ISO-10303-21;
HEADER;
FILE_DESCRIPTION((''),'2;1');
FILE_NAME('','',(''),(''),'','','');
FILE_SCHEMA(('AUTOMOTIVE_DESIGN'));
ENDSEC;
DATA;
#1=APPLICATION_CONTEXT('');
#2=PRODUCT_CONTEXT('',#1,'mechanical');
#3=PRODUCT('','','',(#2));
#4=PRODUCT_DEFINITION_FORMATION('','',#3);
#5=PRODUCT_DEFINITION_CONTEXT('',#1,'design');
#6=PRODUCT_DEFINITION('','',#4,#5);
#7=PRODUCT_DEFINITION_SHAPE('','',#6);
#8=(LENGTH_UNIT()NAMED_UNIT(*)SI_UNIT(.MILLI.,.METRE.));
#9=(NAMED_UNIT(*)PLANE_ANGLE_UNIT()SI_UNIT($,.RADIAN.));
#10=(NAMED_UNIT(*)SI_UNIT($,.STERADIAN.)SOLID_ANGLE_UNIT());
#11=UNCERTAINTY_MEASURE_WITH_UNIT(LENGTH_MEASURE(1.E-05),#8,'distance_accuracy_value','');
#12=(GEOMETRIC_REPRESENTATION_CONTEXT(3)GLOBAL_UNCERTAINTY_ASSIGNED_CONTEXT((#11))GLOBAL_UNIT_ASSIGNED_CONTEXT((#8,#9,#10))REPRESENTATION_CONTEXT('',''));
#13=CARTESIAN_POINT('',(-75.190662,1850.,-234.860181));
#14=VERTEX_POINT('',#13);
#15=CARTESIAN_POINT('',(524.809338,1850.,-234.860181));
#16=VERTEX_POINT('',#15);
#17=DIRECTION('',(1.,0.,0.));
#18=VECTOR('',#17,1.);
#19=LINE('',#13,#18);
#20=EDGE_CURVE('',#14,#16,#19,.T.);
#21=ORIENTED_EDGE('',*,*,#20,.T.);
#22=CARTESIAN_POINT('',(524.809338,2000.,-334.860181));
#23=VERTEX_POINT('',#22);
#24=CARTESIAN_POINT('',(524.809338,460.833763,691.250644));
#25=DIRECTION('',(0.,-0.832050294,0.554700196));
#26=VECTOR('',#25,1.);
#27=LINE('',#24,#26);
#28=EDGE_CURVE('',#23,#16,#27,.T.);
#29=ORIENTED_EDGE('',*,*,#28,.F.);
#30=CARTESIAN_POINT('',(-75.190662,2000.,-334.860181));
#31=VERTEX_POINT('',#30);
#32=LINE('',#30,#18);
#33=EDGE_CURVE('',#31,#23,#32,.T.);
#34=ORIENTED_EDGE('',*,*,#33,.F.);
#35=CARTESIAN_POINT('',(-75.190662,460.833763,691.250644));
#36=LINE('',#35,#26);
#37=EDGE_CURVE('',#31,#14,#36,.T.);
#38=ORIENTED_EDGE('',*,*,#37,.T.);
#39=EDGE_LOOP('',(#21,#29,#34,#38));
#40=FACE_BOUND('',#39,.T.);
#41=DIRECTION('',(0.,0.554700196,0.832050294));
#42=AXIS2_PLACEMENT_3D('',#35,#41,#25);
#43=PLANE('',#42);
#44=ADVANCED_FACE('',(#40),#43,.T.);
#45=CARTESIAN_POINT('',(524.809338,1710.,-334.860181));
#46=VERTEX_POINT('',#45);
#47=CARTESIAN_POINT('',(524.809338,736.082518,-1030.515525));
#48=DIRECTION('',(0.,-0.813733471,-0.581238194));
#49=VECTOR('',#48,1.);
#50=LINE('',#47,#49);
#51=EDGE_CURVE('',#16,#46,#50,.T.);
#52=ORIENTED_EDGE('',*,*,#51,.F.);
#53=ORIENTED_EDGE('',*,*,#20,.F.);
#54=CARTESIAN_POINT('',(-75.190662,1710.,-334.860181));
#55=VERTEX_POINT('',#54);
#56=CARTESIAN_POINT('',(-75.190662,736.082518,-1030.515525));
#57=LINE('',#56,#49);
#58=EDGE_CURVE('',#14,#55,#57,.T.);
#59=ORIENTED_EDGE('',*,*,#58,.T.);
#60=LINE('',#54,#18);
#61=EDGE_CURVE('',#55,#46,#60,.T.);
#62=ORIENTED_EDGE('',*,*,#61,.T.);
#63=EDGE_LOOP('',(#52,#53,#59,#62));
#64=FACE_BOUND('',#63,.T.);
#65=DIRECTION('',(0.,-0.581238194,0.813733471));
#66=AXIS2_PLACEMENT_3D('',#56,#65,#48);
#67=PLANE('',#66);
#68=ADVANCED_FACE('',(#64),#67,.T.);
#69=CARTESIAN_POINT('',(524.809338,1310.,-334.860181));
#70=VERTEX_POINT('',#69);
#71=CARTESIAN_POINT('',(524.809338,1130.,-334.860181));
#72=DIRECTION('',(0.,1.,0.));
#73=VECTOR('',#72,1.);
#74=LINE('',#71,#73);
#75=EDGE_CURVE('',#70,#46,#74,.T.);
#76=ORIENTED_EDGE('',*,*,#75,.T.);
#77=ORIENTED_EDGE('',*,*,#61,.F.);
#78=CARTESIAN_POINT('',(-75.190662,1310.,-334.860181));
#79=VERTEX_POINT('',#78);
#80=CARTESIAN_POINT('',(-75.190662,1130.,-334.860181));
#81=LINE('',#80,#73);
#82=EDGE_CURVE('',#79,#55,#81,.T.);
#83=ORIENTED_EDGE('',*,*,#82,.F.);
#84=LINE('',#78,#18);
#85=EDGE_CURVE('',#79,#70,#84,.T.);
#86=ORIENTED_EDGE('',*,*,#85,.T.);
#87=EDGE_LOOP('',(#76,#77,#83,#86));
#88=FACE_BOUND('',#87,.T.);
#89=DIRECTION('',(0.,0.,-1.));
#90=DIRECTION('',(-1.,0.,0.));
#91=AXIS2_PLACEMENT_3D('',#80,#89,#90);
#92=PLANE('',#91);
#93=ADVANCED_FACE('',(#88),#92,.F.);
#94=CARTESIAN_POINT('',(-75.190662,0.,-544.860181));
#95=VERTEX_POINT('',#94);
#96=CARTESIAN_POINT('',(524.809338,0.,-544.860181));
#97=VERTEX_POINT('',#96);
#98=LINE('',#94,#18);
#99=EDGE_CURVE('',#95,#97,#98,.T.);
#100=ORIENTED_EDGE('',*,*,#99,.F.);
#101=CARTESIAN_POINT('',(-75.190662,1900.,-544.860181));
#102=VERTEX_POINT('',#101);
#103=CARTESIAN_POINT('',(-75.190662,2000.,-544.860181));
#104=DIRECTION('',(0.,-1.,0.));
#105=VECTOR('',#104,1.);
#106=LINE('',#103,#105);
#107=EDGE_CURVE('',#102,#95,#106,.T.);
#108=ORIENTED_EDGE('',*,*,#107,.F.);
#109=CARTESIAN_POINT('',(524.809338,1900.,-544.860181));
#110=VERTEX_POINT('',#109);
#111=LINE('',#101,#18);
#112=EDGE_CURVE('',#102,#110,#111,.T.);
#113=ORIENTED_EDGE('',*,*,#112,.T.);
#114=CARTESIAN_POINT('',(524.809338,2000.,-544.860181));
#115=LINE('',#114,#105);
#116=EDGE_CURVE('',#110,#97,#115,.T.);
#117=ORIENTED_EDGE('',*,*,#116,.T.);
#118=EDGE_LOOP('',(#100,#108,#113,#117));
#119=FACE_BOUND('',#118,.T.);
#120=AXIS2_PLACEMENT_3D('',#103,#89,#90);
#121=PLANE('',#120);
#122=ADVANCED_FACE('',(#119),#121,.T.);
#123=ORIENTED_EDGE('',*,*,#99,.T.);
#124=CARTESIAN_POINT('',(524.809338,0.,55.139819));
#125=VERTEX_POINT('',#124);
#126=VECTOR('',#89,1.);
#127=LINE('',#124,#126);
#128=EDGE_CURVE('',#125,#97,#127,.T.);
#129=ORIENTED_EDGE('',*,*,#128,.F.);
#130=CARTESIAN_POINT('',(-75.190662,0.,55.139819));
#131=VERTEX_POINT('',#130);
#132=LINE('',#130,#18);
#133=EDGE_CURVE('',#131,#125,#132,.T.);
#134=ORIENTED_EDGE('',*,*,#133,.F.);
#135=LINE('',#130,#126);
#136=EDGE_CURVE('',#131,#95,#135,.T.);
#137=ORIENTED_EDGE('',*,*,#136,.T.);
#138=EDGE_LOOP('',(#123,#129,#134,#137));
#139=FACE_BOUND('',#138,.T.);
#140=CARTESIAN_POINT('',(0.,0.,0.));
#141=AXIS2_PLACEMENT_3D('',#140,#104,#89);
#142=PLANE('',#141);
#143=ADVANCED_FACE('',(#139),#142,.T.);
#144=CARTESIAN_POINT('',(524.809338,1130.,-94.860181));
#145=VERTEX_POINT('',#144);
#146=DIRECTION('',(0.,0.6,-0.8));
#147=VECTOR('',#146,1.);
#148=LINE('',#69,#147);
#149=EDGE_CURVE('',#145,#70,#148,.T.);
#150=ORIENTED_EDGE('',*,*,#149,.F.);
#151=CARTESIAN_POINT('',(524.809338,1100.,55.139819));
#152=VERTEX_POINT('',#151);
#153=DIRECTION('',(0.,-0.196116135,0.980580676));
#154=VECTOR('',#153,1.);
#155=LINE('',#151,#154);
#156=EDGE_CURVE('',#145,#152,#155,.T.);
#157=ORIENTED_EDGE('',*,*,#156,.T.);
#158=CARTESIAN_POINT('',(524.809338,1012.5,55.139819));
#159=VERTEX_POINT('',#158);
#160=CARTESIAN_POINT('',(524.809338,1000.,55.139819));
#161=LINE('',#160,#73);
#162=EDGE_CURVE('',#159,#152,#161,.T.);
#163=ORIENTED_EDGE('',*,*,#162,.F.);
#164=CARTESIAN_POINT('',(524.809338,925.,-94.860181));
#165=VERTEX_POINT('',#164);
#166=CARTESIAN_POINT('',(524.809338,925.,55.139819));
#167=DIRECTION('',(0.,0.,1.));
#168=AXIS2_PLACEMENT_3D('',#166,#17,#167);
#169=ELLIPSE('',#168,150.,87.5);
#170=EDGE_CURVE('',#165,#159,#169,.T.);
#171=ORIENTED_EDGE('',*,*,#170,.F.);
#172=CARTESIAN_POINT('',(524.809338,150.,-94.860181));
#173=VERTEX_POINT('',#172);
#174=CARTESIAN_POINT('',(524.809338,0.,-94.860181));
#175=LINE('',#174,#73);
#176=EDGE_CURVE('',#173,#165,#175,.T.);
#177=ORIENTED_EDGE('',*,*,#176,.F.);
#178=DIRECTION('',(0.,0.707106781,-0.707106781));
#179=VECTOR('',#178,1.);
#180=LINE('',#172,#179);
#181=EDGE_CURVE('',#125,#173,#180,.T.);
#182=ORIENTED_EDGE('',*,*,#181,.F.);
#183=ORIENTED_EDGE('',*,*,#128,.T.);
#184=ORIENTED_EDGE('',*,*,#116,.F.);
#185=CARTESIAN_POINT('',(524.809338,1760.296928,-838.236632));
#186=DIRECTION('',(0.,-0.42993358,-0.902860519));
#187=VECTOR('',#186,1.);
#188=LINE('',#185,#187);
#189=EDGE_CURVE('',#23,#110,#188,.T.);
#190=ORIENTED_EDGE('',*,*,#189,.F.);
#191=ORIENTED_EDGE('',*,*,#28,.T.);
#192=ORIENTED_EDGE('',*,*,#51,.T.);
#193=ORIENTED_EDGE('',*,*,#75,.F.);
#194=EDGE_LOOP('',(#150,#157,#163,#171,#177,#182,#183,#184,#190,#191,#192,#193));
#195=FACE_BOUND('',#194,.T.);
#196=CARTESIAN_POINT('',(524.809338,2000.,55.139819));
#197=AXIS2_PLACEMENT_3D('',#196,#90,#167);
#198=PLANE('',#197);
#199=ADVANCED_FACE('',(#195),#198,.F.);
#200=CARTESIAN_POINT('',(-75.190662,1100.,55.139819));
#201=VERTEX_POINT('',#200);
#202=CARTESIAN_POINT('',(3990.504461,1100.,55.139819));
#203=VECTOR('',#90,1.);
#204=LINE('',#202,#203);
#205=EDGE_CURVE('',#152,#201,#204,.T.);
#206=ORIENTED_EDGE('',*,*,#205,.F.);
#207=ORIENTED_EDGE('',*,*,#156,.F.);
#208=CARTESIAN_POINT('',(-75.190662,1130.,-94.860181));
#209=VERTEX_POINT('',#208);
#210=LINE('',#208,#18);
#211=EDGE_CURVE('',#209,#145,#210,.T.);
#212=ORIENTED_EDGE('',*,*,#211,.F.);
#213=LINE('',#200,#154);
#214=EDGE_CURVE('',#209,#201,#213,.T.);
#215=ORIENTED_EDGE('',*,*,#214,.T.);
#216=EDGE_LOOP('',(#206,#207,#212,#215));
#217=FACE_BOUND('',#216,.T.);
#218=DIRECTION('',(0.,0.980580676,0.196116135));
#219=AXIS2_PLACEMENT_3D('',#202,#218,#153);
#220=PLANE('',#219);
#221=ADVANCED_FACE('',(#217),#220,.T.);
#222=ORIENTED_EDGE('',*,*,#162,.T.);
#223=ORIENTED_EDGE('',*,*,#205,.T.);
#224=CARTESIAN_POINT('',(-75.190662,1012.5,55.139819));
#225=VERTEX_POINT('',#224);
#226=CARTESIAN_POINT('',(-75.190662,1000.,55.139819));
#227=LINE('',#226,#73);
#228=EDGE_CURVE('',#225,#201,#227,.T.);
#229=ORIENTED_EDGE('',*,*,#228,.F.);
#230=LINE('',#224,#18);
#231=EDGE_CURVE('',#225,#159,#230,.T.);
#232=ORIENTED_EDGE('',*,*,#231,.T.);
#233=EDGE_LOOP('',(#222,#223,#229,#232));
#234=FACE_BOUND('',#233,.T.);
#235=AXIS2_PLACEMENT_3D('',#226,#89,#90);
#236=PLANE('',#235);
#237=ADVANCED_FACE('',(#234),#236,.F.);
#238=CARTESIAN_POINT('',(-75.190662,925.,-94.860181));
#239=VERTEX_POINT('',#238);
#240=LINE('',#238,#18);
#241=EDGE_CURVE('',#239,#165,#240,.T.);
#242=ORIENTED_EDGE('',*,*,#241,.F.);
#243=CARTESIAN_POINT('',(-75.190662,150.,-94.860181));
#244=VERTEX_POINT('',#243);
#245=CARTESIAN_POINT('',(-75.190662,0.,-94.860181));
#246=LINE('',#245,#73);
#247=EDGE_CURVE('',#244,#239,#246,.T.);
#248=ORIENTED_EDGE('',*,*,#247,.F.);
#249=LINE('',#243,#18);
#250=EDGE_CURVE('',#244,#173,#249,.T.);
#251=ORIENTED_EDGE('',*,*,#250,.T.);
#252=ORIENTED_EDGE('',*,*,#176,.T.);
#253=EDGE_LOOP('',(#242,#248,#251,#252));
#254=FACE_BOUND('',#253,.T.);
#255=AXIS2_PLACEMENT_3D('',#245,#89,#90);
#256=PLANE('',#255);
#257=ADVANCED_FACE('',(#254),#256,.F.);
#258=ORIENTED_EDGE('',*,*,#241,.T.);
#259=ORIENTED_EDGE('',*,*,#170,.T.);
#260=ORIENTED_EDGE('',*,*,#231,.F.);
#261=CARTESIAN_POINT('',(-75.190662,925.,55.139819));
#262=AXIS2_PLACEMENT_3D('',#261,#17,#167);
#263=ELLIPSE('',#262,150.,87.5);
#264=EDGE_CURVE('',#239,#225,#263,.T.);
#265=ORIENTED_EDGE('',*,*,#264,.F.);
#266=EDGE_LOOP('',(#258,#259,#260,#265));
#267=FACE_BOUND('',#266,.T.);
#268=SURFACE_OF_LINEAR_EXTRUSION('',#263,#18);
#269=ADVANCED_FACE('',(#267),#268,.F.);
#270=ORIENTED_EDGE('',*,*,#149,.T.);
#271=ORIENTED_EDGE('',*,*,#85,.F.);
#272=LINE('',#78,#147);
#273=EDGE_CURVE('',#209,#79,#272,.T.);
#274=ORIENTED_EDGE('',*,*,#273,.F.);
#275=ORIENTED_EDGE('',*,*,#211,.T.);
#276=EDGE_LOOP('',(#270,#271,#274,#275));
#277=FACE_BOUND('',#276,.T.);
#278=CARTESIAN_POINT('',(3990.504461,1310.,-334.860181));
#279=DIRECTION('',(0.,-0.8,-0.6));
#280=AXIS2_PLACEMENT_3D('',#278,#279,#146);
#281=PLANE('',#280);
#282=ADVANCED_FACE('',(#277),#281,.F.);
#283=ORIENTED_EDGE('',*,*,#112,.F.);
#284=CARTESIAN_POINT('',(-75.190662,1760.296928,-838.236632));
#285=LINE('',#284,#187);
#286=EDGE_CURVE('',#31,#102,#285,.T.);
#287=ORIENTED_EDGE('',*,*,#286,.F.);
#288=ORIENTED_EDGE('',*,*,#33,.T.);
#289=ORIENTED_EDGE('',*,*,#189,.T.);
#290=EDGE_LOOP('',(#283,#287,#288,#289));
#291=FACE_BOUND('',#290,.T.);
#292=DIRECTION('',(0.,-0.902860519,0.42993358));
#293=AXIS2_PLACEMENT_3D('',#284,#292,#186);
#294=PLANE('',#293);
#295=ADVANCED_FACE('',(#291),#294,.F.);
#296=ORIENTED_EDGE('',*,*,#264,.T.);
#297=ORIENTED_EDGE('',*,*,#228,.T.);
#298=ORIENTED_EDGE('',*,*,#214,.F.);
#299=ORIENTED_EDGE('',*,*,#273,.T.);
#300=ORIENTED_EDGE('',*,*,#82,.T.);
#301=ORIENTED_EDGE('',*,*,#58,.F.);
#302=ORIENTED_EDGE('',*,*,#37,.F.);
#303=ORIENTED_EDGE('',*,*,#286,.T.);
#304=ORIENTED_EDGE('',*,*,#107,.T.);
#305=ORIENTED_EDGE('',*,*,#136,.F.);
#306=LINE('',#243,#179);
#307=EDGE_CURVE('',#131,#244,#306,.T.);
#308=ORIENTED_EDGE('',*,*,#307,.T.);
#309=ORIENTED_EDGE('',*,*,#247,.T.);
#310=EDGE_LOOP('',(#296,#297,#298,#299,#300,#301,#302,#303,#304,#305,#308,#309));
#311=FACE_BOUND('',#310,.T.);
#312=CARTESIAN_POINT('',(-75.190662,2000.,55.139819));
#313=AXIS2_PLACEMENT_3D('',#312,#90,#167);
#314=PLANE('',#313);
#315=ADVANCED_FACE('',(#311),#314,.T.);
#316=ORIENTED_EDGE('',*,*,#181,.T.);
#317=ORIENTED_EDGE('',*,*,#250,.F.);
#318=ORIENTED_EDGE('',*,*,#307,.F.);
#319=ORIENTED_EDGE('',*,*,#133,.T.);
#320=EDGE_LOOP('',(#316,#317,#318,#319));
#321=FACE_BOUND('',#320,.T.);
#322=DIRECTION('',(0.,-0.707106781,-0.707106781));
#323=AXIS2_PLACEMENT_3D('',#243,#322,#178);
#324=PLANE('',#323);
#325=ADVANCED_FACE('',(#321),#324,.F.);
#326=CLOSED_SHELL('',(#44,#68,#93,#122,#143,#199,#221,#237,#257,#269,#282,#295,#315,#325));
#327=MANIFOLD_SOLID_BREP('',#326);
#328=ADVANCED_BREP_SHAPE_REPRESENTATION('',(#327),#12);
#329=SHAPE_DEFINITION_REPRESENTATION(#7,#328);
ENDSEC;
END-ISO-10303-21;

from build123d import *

# Parameters (mm, degrees)
ESQUISSE1_W                   = 600
ESQUISSE1_H                   = 600
BOSS_EXTRU_1_DEPTH            = 2000
ESQUISSE11_W                  = 150
ESQUISSE11_H                  = 800
ENL_V_MAT_EXTRU_1_DEPTH       = 600
ESQUISSE12_W                  = 150
ESQUISSE12_H                  = 1100
ENL_V_MAT_EXTRU_2_DEPTH       = 600
ESQUISSE14_W                  = 150
ESQUISSE14_H                  = 150
BOSS_EXTRU_3_DEPTH            = 600
ENL_V_MAT_EXTRU_5_DEPTH       = 600
ESQUISSE19_W                  = 150
ESQUISSE19_H                  = 100
ENL_V_MAT_EXTRU_6_DEPTH       = 600
ESQUISSE25_W                  = 150
ESQUISSE25_H                  = 100
BOSS_EXTRU_4_DEPTH            = 600
ESQUISSE26_W                  = 150
ESQUISSE26_H                  = 75
BOSS_EXTRU_7_DEPTH            = 600
ESQUISSE30_RX                 = 150
ESQUISSE30_RY                 = 87.5
ENL_V_MAT_EXTRU_7_DEPTH       = 600
ESQUISSE32_W                  = 150
ESQUISSE32_H                  = 30
BOSS_EXTRU_8_DEPTH            = 600
ENL_V_MAT_EXTRU_8_DEPTH       = 2158.978826807
ENL_V_MAT_EXTRU_8_DEPTH_BACK  = 600
ESQUISSE34_W                  = 240
ESQUISSE34_H                  = 870
ENL_V_MAT_EXTRU_9_DEPTH       = 600
ESQUISSE35_W                  = 240
ESQUISSE35_H                  = 180
BOSS_EXTRU_9_DEPTH            = 600
ENL_V_START                   = -600
ENL_V_MAT_EXTRU_10_DEPTH      = 600
ENL_V_MAT_EXTRU_11_DEPTH      = 2158.978826807
ENL_V_MAT_EXTRU_11_DEPTH_BACK = 600
ENL_V_MAT_EXTRU_12_DEPTH      = 2158.978826807
ENL_V_MAT_EXTRU_12_DEPTH_BACK = 600
ESQUISSE41_W                  = 210
ESQUISSE41_H                  = 100
BOSS_EXTRU_10_DEPTH           = 600
ESQUISSE43_W                  = 100
ESQUISSE43_H                  = 150
BOSS_EXTRU_12_DEPTH           = 600
ESQUISSE44_W                  = 100
ESQUISSE44_H                  = 140
BOSS_EXTRU_13_DEPTH           = 600
ENL_V_MAT_EXTRU_13_DEPTH      = 600
ENL_V_MAT_EXTRU_14_DEPTH      = 600
ENL_V_MAT_EXTRU_15_DEPTH      = 600


# Read off the part's stored shape, not the designer's step: Enlèv. mat.-Extru.10
with BuildPart() as part:
    # Esquisse1 → Boss.-Extru.1 (new body)
    with BuildSketch(Plane(origin=(0, 0, 0), x_dir=(1, 0, 0), z_dir=(0, 1, 0))):
        with Locations((224.80933771, 244.860180987)):
            Rectangle(ESQUISSE1_W, ESQUISSE1_H)
    extrude(amount=BOSS_EXTRU_1_DEPTH)

    # Esquisse11 → Enlèv. mat.-Extru.1 (cut)
    with BuildSketch(Plane(origin=(524.80933771, 0, 0), x_dir=(0, 0, -1), z_dir=(1, 0, 0))):
        with Locations((19.860180987, 400)):
            Rectangle(ESQUISSE11_W, ESQUISSE11_H)
    extrude(amount=-ENL_V_MAT_EXTRU_1_DEPTH, mode=Mode.SUBTRACT)

    # Esquisse12 → Enlèv. mat.-Extru.2 (cut)
    with BuildSketch(Plane(origin=(524.80933771, 0, 0), x_dir=(0, 0, -1), z_dir=(1, 0, 0))):
        with Locations((19.860180987, 1450)):
            Rectangle(ESQUISSE12_W, ESQUISSE12_H)
    extrude(amount=-ENL_V_MAT_EXTRU_2_DEPTH, mode=Mode.SUBTRACT)

    # Esquisse14 → Boss.-Extru.3 (add)
    with BuildSketch(Plane(origin=(524.80933771, 0, 0), x_dir=(0, 0, -1), z_dir=(1, 0, 0))):
        with Locations((19.860180987, 75)):
            Rectangle(ESQUISSE14_W, ESQUISSE14_H)
    extrude(amount=-BOSS_EXTRU_3_DEPTH)

    # Esquisse18 → Enlèv. mat.-Extru.5 (cut)
    with BuildSketch(Plane(origin=(524.80933771, 0, 0), x_dir=(0, 0, -1), z_dir=(1, 0, 0))):
        Polygon((94.860180987, 150), (-55.139819013, 0), (-55.139819013, 150), align=None)
    extrude(amount=-ENL_V_MAT_EXTRU_5_DEPTH, mode=Mode.SUBTRACT)

    # Esquisse19 → Enlèv. mat.-Extru.6 (cut)
    with BuildSketch(Plane(origin=(524.80933771, 0, 0), x_dir=(0, 0, -1), z_dir=(1, 0, 0))):
        with Locations((19.860180987, 850)):
            Rectangle(ESQUISSE19_W, ESQUISSE19_H)
    extrude(amount=-ENL_V_MAT_EXTRU_6_DEPTH, mode=Mode.SUBTRACT)

    # Esquisse25 → Boss.-Extru.4 (add)
    with BuildSketch(Plane(origin=(524.80933771, 0, 0), x_dir=(0, 0, -1), z_dir=(1, 0, 0))):
        with Locations((19.860180987, 1050)):
            Rectangle(ESQUISSE25_W, ESQUISSE25_H)
    extrude(amount=-BOSS_EXTRU_4_DEPTH)

    # Esquisse26 → Boss.-Extru.7 (add)
    with BuildSketch(Plane(origin=(524.80933771, 0, 0), x_dir=(0, 0, -1), z_dir=(1, 0, 0))):
        with Locations((19.860180987, 962.5)):
            Rectangle(ESQUISSE26_W, ESQUISSE26_H)
    extrude(amount=-BOSS_EXTRU_7_DEPTH)

    # Esquisse30 → Enlèv. mat.-Extru.7 (cut)
    with BuildSketch(Plane(origin=(524.80933771, 0, 0), x_dir=(0, 0, -1), z_dir=(1, 0, 0))):
        with Locations((-55.139819013, 925)):
            Ellipse(ESQUISSE30_RX, ESQUISSE30_RY)
    extrude(amount=-ENL_V_MAT_EXTRU_7_DEPTH, mode=Mode.SUBTRACT)

    # Esquisse32 → Boss.-Extru.8 (add)
    with BuildSketch(Plane(origin=(524.80933771, 0, 0), x_dir=(0, 0, -1), z_dir=(1, 0, 0))):
        with Locations((19.860180987, 1115)):
            Rectangle(ESQUISSE32_W, ESQUISSE32_H)
    extrude(amount=-BOSS_EXTRU_8_DEPTH)

    # Esquisse33 → Enlèv. mat.-Extru.8 (cut, two sides: drawn at the far end of the back side and taken through both)
    with BuildSketch(Plane(origin=(524.80933771, 0, 0), x_dir=(0, 0, -1), z_dir=(1, 0, 0)).offset(-ENL_V_MAT_EXTRU_8_DEPTH_BACK)):
        Polygon((94.860180987, 1130), (-55.139819013, 1130), (-55.139819013, 1100), align=None)
    extrude(amount=ENL_V_MAT_EXTRU_8_DEPTH + ENL_V_MAT_EXTRU_8_DEPTH_BACK, mode=Mode.SUBTRACT)

    # Esquisse34 → Enlèv. mat.-Extru.9 (cut)
    with BuildSketch(Plane(origin=(524.80933771, 0, 0), x_dir=(0, 0, -1), z_dir=(1, 0, 0))):
        with Locations((214.860180987, 1565)):
            Rectangle(ESQUISSE34_W, ESQUISSE34_H)
    extrude(amount=-ENL_V_MAT_EXTRU_9_DEPTH, mode=Mode.SUBTRACT)

    # Esquisse35 → Boss.-Extru.9 (add)
    with BuildSketch(Plane(origin=(524.80933771, 0, 0), x_dir=(0, 0, -1), z_dir=(1, 0, 0))):
        with Locations((214.860180987, 1220)):
            Rectangle(ESQUISSE35_W, ESQUISSE35_H)
    extrude(amount=-BOSS_EXTRU_9_DEPTH)

    # Enlèv. mat.-Extru.10 outline → Enlèv. mat.-Extru.10 (cut)
    with BuildSketch(Plane(origin=(524.80933771, 0, 0), x_dir=(0, 0, -1), z_dir=(1, 0, 0)).offset(ENL_V_START)):
        Polygon((94.860180987, 1310), (94.860180987, 1130), (334.860180987, 1310), align=None)
    extrude(amount=ENL_V_MAT_EXTRU_10_DEPTH, mode=Mode.SUBTRACT)

    # Esquisse37 → Enlèv. mat.-Extru.11 (cut, two sides: drawn at the far end of the back side and taken through both)
    with BuildSketch(Plane(origin=(524.80933771, 0, 0), x_dir=(0, 0, -1), z_dir=(1, 0, 0)).offset(-ENL_V_MAT_EXTRU_11_DEPTH_BACK)):
        Polygon((544.860180987, 1900), (544.860180987, 2000), (394.860180987, 2000), align=None)
    extrude(amount=ENL_V_MAT_EXTRU_11_DEPTH + ENL_V_MAT_EXTRU_11_DEPTH_BACK, mode=Mode.SUBTRACT)

    # Esquisse38 → Enlèv. mat.-Extru.12 (cut, two sides: drawn at the far end of the back side and taken through both)
    with BuildSketch(Plane(origin=(524.80933771, 0, 0), x_dir=(0, 0, -1), z_dir=(1, 0, 0)).offset(-ENL_V_MAT_EXTRU_12_DEPTH_BACK)):
        Polygon((2509.437735817, 5524.295924716), (394.860180987, 2000), (334.860180987, 1900), (-1779.717373842, -1624.295924716), (-8828.309223275, 2604.859184943), (-4539.154113615, 9753.451034376), align=None)
    extrude(amount=ENL_V_MAT_EXTRU_12_DEPTH + ENL_V_MAT_EXTRU_12_DEPTH_BACK, mode=Mode.SUBTRACT)

    # Esquisse41 → Boss.-Extru.10 (add)
    with BuildSketch(Plane(origin=(524.80933771, 0, 0), x_dir=(0, 0, -1), z_dir=(1, 0, 0))):
        with Locations((439.860180987, 1950)):
            Rectangle(ESQUISSE41_W, ESQUISSE41_H)
    extrude(amount=-BOSS_EXTRU_10_DEPTH)

    # Esquisse43 → Boss.-Extru.12 (add)
    with BuildSketch(Plane(origin=(524.80933771, 0, 0), x_dir=(0, 0, -1), z_dir=(1, 0, 0))):
        with Locations((284.860180987, 1925)):
            Rectangle(ESQUISSE43_W, ESQUISSE43_H)
    extrude(amount=-BOSS_EXTRU_12_DEPTH)

    # Esquisse44 → Boss.-Extru.13 (add)
    with BuildSketch(Plane(origin=(524.80933771, 0, 0), x_dir=(0, 0, -1), z_dir=(1, 0, 0))):
        with Locations((284.860180987, 1780)):
            Rectangle(ESQUISSE44_W, ESQUISSE44_H)
    extrude(amount=-BOSS_EXTRU_13_DEPTH)

    # Esquisse45 → Enlèv. mat.-Extru.13 (cut)
    with BuildSketch(Plane(origin=(524.80933771, 0, 0), x_dir=(0, 0, -1), z_dir=(1, 0, 0))):
        Polygon((334.860180987, 1710), (234.860180987, 1850), (234.860180987, 1710), align=None)
    extrude(amount=-ENL_V_MAT_EXTRU_13_DEPTH, mode=Mode.SUBTRACT)

    # Esquisse46 → Enlèv. mat.-Extru.14 (cut)
    with BuildSketch(Plane(origin=(524.80933771, 0, 0), x_dir=(0, 0, -1), z_dir=(1, 0, 0))):
        Polygon((234.860180987, 1850), (334.860180987, 2000), (234.860180987, 2000), align=None)
    extrude(amount=-ENL_V_MAT_EXTRU_14_DEPTH, mode=Mode.SUBTRACT)

    # Esquisse47 → Enlèv. mat.-Extru.15 (cut)
    with BuildSketch(Plane(origin=(524.80933771, 0, 0), x_dir=(0, 0, -1), z_dir=(1, 0, 0))):
        Polygon((544.860180987, 2000), (334.860180987, 2000), (544.860180987, 1900), align=None)
    extrude(amount=-ENL_V_MAT_EXTRU_15_DEPTH, mode=Mode.SUBTRACT)


solid = part.part
